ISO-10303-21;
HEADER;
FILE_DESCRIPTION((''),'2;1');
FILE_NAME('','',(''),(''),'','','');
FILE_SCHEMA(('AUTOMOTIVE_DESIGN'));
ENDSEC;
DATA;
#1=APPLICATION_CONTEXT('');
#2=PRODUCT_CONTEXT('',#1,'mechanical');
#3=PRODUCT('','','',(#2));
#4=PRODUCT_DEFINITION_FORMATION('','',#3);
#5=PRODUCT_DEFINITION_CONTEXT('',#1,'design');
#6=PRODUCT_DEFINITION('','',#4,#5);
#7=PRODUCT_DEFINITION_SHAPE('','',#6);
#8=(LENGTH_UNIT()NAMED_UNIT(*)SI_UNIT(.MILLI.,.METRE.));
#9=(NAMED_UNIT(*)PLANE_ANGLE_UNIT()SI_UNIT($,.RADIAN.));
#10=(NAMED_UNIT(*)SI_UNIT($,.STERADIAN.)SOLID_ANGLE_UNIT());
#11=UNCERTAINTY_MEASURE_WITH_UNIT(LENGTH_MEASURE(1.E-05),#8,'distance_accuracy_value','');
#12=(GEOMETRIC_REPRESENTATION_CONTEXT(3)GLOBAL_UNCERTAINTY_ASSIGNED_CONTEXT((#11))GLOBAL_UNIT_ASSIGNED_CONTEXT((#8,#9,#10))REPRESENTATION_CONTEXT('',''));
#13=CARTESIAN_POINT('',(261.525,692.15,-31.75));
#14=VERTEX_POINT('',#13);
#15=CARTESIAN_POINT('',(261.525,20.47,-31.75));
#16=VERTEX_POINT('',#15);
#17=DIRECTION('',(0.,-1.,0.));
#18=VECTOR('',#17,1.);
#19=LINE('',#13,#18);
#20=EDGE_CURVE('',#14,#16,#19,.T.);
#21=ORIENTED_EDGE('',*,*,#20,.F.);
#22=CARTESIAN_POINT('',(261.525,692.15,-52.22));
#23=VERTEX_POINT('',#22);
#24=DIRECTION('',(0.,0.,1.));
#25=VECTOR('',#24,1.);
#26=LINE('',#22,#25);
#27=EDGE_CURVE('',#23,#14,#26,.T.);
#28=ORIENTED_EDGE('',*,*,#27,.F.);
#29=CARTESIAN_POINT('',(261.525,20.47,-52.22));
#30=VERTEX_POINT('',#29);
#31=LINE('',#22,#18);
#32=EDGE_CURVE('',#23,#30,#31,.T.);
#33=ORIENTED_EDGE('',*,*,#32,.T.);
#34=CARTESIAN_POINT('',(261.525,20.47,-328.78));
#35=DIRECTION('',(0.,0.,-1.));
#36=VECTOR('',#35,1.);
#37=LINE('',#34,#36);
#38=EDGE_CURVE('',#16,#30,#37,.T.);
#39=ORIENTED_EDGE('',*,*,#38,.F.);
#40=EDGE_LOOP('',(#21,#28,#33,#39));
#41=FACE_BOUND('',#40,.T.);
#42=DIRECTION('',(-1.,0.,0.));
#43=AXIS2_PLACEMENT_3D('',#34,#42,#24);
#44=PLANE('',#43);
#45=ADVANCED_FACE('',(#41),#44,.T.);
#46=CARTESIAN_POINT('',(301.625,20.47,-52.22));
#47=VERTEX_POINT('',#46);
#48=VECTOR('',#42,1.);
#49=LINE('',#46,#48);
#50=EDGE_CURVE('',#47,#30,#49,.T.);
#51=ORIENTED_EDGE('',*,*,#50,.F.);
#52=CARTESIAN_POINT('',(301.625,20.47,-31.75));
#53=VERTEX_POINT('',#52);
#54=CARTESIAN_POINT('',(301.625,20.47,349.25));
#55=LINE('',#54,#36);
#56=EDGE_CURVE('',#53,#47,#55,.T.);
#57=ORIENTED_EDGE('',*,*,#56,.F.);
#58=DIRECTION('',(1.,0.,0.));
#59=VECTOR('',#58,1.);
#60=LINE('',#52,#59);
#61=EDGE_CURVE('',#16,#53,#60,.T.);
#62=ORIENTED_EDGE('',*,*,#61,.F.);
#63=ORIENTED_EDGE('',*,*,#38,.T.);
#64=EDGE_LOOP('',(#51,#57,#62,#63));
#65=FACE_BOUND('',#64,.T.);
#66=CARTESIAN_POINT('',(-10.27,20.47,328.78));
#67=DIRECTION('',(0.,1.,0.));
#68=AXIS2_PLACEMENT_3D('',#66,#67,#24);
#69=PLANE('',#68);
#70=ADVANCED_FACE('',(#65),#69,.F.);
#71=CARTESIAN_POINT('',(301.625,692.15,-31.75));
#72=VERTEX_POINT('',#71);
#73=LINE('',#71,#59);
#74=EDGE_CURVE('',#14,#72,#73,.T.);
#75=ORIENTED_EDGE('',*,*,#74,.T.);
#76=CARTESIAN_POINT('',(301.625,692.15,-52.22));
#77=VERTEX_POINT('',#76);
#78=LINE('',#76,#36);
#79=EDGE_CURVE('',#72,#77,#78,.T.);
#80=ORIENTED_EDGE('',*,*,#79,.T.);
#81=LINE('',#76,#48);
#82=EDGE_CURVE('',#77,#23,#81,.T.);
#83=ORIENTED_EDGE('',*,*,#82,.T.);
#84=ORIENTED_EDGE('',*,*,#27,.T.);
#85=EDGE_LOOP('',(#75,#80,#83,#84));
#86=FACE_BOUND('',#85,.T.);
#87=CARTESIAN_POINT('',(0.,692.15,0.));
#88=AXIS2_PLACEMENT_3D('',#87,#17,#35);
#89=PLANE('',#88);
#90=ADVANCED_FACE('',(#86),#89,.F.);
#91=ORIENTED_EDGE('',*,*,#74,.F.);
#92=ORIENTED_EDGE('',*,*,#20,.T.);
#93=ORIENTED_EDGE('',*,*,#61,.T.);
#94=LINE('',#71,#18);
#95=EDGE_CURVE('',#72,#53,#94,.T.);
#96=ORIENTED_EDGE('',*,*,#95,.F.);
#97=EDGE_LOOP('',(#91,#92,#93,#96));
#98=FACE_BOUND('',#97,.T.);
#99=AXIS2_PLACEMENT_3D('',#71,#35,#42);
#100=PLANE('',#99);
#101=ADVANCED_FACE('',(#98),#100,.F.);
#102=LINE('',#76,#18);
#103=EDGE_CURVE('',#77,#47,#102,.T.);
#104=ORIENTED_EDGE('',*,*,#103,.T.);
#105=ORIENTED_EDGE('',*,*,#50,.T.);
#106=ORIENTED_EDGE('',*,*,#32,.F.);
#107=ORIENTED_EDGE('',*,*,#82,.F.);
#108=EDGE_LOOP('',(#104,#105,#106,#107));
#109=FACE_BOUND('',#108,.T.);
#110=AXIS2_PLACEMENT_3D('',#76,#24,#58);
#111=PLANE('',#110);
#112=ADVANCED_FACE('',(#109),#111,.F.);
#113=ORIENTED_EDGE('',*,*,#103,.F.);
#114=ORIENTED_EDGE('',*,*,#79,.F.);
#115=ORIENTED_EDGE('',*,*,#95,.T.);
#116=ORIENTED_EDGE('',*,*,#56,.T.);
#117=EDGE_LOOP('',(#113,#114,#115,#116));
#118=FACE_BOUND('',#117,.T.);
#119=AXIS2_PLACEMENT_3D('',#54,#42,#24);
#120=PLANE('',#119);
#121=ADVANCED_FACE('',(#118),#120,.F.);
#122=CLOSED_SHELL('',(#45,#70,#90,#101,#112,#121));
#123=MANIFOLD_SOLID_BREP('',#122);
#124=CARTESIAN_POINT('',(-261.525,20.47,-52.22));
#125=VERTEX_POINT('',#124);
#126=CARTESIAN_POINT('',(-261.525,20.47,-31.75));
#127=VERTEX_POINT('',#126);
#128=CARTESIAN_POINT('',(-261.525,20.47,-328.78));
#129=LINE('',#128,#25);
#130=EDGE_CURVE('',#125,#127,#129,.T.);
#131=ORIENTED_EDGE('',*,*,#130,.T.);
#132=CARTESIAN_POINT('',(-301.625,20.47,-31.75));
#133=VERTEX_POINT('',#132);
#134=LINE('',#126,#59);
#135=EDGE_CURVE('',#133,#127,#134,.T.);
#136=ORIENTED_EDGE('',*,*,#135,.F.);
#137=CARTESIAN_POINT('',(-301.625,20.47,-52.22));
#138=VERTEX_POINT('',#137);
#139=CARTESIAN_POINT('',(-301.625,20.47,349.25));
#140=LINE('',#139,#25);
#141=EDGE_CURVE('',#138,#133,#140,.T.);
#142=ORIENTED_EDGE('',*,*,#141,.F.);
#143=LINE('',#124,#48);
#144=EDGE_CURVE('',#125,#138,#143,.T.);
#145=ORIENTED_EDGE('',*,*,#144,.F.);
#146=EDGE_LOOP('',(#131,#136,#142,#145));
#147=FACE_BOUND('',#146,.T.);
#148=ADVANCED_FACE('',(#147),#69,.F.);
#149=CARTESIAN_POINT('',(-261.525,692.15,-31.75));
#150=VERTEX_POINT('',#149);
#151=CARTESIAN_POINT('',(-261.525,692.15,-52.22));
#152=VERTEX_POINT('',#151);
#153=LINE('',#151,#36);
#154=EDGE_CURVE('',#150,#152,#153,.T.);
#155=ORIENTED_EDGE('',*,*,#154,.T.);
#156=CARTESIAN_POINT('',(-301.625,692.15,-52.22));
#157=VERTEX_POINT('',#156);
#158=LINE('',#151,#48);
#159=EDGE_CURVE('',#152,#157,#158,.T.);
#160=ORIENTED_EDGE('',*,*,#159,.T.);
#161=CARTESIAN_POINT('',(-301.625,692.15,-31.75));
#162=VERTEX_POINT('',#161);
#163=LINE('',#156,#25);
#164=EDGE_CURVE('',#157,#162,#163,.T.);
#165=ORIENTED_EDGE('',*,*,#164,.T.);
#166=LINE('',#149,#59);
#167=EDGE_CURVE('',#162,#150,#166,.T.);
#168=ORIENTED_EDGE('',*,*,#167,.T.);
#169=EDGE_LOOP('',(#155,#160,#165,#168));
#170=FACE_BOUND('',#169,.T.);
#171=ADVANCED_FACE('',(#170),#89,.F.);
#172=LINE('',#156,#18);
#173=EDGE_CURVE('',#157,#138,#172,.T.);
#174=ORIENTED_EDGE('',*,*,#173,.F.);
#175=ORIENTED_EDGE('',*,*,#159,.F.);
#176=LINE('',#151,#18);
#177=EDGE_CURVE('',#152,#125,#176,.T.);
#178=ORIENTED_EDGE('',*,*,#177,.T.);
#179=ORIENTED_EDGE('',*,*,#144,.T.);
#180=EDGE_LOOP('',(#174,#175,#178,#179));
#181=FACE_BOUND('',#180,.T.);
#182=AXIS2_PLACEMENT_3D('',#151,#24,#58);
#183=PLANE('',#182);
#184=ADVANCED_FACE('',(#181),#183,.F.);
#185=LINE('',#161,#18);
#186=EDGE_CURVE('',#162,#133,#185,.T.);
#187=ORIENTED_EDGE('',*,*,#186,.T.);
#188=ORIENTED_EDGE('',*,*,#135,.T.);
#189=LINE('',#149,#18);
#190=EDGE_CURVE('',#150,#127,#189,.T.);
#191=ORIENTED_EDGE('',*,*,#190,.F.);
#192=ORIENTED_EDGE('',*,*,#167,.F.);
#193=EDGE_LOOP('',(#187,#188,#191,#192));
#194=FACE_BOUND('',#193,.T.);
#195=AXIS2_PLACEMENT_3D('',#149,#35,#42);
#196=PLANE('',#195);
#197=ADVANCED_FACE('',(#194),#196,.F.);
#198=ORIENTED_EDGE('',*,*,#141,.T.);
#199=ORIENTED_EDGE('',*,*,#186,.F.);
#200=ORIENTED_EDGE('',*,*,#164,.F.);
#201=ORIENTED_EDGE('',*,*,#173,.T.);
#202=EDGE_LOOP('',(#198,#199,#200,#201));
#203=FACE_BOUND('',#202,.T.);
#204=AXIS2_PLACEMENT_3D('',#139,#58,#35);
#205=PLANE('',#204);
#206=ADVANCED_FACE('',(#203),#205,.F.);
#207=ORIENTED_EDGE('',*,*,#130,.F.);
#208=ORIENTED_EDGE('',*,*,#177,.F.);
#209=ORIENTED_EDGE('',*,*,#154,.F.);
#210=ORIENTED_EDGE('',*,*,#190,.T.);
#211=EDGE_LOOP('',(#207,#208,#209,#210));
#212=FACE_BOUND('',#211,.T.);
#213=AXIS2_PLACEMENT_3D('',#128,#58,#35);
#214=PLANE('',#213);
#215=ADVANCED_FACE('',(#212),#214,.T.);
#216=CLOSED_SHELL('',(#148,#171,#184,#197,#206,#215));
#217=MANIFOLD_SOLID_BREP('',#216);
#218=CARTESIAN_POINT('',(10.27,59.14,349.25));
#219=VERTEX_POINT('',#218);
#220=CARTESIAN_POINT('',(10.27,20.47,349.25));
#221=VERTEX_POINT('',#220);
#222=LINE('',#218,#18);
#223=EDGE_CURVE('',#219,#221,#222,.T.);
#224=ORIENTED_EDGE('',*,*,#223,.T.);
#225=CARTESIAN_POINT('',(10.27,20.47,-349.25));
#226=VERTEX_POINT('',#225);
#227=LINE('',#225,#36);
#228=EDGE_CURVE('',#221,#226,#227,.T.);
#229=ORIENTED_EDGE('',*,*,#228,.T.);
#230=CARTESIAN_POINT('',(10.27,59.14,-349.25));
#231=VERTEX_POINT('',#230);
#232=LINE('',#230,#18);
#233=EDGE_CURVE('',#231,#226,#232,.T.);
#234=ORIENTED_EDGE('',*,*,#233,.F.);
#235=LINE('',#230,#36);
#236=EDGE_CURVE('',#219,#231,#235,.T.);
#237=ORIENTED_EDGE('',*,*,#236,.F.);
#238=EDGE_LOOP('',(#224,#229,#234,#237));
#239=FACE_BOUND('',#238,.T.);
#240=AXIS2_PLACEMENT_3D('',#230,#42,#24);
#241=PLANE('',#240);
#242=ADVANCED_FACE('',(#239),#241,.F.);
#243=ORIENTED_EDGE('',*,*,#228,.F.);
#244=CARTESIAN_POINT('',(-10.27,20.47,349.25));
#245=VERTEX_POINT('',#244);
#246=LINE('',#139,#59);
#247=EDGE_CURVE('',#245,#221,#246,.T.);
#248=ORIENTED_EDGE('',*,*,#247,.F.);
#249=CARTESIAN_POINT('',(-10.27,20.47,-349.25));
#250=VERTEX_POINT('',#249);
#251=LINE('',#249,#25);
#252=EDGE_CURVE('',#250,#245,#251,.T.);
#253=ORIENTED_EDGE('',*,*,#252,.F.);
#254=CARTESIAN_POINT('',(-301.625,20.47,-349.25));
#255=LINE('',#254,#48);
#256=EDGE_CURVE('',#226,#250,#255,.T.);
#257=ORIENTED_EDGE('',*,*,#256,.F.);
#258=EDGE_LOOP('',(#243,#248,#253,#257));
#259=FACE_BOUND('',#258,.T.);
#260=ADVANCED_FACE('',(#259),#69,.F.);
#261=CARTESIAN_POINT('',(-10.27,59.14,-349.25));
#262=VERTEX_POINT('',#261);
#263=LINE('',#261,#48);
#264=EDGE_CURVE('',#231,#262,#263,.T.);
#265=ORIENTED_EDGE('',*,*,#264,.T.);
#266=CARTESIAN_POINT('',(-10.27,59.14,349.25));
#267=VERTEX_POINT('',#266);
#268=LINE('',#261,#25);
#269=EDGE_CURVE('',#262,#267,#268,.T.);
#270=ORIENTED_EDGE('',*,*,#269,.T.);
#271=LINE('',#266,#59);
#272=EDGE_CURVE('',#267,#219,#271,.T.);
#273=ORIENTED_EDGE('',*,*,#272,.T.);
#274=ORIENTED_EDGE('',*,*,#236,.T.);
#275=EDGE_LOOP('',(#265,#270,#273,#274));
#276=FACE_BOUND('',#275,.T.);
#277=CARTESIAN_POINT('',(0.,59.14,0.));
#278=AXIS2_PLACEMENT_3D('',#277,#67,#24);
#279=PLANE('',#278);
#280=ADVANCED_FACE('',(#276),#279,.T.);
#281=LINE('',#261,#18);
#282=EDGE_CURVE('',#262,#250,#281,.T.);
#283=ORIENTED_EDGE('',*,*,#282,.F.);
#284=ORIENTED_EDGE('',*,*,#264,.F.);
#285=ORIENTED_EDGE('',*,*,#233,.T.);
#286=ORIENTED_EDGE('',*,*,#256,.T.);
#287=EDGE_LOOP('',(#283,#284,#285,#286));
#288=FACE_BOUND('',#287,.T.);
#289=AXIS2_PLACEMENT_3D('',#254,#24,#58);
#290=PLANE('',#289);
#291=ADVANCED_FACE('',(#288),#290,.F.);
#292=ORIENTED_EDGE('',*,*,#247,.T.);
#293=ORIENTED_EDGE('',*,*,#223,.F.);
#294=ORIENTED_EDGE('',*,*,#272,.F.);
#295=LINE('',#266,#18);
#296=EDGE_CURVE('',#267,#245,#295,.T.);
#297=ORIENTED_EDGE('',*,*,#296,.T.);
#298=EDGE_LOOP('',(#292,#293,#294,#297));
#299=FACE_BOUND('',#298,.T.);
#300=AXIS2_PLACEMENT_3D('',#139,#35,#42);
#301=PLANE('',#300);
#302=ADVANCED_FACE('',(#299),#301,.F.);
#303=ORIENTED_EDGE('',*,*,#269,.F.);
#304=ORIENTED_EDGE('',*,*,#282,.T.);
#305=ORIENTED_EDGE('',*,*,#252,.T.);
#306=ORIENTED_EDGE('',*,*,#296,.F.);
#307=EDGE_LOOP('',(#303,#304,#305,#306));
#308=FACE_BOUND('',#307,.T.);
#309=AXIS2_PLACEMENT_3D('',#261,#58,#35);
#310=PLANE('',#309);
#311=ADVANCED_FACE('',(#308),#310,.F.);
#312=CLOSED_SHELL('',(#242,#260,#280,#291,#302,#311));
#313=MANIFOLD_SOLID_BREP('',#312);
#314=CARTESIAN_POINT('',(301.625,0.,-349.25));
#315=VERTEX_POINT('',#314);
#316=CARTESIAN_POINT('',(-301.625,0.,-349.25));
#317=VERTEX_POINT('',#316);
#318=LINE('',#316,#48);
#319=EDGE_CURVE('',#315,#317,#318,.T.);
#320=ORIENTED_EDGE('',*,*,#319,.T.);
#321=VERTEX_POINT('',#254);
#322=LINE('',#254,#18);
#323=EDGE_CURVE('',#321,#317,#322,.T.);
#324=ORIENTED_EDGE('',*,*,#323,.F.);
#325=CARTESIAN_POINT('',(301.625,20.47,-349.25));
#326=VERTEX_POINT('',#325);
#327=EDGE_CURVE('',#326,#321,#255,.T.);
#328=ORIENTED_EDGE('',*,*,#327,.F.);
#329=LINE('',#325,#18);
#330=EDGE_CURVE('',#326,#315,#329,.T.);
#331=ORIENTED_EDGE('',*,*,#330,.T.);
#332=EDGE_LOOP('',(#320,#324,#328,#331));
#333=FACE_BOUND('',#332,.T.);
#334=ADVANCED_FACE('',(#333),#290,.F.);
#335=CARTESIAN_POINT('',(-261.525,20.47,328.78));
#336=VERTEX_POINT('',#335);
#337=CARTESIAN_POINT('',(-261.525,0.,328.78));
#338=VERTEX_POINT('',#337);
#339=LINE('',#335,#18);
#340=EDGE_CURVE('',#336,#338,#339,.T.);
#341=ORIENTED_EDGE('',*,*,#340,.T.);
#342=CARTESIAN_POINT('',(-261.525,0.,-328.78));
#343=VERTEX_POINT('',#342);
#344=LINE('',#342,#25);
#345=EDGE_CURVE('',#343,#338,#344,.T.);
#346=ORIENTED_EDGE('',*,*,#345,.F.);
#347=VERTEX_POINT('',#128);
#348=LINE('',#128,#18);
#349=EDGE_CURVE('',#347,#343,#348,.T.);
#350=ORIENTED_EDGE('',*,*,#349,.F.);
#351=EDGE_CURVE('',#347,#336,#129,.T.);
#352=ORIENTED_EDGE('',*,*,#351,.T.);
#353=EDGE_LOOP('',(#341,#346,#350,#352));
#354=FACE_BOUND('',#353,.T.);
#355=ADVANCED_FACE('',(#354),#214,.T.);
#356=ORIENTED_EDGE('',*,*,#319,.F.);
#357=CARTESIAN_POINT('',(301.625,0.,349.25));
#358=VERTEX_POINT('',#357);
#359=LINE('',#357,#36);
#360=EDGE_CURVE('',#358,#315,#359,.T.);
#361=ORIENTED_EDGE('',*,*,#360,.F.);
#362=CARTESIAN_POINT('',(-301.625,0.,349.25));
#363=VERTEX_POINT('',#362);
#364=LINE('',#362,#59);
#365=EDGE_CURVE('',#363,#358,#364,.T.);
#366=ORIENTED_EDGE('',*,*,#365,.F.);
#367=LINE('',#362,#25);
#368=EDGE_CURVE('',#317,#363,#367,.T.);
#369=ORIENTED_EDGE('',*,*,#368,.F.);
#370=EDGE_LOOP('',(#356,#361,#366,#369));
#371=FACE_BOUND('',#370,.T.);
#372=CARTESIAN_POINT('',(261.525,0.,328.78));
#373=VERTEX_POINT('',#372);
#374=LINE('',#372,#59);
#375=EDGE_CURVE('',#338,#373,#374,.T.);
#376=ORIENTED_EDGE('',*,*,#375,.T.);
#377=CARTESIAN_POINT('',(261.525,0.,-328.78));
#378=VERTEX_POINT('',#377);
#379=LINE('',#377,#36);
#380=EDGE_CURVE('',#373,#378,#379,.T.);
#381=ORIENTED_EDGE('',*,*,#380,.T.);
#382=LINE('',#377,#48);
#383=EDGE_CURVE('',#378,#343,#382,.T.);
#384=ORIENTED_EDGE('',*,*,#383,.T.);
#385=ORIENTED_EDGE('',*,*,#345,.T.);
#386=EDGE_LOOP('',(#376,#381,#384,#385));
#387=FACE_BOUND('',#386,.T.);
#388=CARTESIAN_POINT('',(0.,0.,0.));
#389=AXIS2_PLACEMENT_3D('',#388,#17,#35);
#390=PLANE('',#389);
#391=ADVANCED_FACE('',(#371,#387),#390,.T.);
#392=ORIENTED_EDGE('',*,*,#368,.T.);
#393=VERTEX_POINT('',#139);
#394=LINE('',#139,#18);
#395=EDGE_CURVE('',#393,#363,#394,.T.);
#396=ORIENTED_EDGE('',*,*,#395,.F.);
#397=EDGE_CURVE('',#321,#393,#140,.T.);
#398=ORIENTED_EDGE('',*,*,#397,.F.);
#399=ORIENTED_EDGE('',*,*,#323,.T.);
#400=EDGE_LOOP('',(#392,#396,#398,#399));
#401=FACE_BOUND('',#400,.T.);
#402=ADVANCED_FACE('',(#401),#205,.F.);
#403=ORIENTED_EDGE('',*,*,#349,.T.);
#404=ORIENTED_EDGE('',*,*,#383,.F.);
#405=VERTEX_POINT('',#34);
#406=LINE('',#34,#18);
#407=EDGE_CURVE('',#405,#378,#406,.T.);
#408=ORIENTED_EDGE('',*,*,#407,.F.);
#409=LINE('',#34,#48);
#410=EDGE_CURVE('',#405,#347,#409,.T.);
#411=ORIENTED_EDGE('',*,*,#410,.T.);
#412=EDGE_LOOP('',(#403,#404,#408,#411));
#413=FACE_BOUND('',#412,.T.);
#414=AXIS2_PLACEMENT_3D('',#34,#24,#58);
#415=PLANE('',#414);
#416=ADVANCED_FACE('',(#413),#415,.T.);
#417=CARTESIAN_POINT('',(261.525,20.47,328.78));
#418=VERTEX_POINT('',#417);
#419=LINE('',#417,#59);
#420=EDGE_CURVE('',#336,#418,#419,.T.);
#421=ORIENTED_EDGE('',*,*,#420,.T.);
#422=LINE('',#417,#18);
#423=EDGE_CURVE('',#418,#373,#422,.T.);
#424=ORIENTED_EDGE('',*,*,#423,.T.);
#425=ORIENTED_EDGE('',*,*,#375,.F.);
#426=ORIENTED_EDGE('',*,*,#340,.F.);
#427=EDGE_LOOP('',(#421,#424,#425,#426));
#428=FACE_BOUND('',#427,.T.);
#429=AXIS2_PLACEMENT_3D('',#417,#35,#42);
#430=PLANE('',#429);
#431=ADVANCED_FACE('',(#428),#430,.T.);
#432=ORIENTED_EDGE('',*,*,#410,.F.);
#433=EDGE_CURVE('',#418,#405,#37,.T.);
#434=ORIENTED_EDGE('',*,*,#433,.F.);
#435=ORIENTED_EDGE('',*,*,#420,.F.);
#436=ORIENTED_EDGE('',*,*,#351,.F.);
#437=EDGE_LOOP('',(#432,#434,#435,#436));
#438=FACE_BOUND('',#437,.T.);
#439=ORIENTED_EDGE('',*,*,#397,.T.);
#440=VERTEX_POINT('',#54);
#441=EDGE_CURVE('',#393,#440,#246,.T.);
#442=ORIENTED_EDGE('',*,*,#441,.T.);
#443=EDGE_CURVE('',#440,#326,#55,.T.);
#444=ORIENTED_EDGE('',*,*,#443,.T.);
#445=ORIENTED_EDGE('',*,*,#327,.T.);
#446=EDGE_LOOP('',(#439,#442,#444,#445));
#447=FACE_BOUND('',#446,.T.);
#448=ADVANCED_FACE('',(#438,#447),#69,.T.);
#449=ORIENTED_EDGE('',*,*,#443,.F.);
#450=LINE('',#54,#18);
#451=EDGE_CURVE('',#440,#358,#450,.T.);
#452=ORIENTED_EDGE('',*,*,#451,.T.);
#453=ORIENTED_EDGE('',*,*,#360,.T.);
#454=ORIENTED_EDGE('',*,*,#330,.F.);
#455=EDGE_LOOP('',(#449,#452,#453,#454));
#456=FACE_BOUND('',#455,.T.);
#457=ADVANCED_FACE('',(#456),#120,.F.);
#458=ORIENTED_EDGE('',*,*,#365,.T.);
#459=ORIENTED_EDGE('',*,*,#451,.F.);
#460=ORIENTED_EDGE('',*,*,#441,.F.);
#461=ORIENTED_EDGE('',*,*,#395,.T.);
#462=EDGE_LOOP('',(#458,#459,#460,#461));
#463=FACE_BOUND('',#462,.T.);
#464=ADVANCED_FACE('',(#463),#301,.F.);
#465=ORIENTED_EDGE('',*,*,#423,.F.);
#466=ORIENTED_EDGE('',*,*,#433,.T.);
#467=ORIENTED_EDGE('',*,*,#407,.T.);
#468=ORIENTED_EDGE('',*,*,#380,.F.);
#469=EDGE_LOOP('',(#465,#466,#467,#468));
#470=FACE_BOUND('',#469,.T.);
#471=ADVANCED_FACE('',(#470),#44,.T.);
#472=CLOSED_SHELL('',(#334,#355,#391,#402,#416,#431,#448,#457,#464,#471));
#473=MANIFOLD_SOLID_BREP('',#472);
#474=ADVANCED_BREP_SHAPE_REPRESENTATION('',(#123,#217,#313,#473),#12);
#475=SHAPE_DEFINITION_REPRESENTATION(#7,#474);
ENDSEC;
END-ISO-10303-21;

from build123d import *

# Parameters (mm, degrees)
SKETCH1_W           = 603.25
SKETCH1_H           = 698.5
SKETCH1_W_2         = 523.05
SKETCH1_H_2         = 657.56
BOSS_EXTRUDE1_DEPTH = 20.47
SKETCH2_W           = 40.1
SKETCH2_H           = 20.47
BOSS_EXTRUDE2_DEPTH = 671.68
SKETCH3_W           = 20.54
SKETCH3_H           = 698.5
BOSS_EXTRUDE3_DEPTH = 38.67


with BuildPart() as part:
    # Sketch1 → Boss-Extrude1 (new body)
    with BuildSketch(Plane(origin=(0, 0, 0), x_dir=(1, 0, 0), z_dir=(0, 1, 0))):
        Rectangle(SKETCH1_W, SKETCH1_H)
        Rectangle(SKETCH1_W_2, SKETCH1_H_2, mode=Mode.SUBTRACT)
    extrude(amount=BOSS_EXTRUDE1_DEPTH)

    # Sketch2 → Boss-Extrude2 (add)
    with BuildSketch(Plane(origin=(0, 20.47, 0), x_dir=(1, 0, 0), z_dir=(0, 1, 0))):
        with Locations((-281.575, 41.985)):
            Rectangle(SKETCH2_W, SKETCH2_H)
        with Locations((281.575, 41.985)):
            Rectangle(SKETCH2_W, SKETCH2_H)
    extrude(amount=BOSS_EXTRUDE2_DEPTH)

    # Sketch3 → Boss-Extrude3 (add)
    with BuildSketch(Plane(origin=(0, 20.47, 0), x_dir=(1, 0, 0), z_dir=(0, 1, 0))):
        Rectangle(SKETCH3_W, SKETCH3_H)
    extrude(amount=BOSS_EXTRUDE3_DEPTH)


with BuildPart() as body_2:
    # Split1: the piece on the far side of the plane
    add(part.part)
    split(bisect_by=Plane(origin=(0, 20.47, 0), x_dir=(0, 0, -1), z_dir=(0, -1, 0)), keep=Keep.BOTTOM)


with BuildPart() as part_1:
    add(part.part)

    # Split1
    split(bisect_by=Plane(origin=(0, 20.47, 0), x_dir=(0, 0, -1), z_dir=(0, -1, 0)), keep=Keep.TOP)


solid = Compound([body_2.part, part_1.part])
